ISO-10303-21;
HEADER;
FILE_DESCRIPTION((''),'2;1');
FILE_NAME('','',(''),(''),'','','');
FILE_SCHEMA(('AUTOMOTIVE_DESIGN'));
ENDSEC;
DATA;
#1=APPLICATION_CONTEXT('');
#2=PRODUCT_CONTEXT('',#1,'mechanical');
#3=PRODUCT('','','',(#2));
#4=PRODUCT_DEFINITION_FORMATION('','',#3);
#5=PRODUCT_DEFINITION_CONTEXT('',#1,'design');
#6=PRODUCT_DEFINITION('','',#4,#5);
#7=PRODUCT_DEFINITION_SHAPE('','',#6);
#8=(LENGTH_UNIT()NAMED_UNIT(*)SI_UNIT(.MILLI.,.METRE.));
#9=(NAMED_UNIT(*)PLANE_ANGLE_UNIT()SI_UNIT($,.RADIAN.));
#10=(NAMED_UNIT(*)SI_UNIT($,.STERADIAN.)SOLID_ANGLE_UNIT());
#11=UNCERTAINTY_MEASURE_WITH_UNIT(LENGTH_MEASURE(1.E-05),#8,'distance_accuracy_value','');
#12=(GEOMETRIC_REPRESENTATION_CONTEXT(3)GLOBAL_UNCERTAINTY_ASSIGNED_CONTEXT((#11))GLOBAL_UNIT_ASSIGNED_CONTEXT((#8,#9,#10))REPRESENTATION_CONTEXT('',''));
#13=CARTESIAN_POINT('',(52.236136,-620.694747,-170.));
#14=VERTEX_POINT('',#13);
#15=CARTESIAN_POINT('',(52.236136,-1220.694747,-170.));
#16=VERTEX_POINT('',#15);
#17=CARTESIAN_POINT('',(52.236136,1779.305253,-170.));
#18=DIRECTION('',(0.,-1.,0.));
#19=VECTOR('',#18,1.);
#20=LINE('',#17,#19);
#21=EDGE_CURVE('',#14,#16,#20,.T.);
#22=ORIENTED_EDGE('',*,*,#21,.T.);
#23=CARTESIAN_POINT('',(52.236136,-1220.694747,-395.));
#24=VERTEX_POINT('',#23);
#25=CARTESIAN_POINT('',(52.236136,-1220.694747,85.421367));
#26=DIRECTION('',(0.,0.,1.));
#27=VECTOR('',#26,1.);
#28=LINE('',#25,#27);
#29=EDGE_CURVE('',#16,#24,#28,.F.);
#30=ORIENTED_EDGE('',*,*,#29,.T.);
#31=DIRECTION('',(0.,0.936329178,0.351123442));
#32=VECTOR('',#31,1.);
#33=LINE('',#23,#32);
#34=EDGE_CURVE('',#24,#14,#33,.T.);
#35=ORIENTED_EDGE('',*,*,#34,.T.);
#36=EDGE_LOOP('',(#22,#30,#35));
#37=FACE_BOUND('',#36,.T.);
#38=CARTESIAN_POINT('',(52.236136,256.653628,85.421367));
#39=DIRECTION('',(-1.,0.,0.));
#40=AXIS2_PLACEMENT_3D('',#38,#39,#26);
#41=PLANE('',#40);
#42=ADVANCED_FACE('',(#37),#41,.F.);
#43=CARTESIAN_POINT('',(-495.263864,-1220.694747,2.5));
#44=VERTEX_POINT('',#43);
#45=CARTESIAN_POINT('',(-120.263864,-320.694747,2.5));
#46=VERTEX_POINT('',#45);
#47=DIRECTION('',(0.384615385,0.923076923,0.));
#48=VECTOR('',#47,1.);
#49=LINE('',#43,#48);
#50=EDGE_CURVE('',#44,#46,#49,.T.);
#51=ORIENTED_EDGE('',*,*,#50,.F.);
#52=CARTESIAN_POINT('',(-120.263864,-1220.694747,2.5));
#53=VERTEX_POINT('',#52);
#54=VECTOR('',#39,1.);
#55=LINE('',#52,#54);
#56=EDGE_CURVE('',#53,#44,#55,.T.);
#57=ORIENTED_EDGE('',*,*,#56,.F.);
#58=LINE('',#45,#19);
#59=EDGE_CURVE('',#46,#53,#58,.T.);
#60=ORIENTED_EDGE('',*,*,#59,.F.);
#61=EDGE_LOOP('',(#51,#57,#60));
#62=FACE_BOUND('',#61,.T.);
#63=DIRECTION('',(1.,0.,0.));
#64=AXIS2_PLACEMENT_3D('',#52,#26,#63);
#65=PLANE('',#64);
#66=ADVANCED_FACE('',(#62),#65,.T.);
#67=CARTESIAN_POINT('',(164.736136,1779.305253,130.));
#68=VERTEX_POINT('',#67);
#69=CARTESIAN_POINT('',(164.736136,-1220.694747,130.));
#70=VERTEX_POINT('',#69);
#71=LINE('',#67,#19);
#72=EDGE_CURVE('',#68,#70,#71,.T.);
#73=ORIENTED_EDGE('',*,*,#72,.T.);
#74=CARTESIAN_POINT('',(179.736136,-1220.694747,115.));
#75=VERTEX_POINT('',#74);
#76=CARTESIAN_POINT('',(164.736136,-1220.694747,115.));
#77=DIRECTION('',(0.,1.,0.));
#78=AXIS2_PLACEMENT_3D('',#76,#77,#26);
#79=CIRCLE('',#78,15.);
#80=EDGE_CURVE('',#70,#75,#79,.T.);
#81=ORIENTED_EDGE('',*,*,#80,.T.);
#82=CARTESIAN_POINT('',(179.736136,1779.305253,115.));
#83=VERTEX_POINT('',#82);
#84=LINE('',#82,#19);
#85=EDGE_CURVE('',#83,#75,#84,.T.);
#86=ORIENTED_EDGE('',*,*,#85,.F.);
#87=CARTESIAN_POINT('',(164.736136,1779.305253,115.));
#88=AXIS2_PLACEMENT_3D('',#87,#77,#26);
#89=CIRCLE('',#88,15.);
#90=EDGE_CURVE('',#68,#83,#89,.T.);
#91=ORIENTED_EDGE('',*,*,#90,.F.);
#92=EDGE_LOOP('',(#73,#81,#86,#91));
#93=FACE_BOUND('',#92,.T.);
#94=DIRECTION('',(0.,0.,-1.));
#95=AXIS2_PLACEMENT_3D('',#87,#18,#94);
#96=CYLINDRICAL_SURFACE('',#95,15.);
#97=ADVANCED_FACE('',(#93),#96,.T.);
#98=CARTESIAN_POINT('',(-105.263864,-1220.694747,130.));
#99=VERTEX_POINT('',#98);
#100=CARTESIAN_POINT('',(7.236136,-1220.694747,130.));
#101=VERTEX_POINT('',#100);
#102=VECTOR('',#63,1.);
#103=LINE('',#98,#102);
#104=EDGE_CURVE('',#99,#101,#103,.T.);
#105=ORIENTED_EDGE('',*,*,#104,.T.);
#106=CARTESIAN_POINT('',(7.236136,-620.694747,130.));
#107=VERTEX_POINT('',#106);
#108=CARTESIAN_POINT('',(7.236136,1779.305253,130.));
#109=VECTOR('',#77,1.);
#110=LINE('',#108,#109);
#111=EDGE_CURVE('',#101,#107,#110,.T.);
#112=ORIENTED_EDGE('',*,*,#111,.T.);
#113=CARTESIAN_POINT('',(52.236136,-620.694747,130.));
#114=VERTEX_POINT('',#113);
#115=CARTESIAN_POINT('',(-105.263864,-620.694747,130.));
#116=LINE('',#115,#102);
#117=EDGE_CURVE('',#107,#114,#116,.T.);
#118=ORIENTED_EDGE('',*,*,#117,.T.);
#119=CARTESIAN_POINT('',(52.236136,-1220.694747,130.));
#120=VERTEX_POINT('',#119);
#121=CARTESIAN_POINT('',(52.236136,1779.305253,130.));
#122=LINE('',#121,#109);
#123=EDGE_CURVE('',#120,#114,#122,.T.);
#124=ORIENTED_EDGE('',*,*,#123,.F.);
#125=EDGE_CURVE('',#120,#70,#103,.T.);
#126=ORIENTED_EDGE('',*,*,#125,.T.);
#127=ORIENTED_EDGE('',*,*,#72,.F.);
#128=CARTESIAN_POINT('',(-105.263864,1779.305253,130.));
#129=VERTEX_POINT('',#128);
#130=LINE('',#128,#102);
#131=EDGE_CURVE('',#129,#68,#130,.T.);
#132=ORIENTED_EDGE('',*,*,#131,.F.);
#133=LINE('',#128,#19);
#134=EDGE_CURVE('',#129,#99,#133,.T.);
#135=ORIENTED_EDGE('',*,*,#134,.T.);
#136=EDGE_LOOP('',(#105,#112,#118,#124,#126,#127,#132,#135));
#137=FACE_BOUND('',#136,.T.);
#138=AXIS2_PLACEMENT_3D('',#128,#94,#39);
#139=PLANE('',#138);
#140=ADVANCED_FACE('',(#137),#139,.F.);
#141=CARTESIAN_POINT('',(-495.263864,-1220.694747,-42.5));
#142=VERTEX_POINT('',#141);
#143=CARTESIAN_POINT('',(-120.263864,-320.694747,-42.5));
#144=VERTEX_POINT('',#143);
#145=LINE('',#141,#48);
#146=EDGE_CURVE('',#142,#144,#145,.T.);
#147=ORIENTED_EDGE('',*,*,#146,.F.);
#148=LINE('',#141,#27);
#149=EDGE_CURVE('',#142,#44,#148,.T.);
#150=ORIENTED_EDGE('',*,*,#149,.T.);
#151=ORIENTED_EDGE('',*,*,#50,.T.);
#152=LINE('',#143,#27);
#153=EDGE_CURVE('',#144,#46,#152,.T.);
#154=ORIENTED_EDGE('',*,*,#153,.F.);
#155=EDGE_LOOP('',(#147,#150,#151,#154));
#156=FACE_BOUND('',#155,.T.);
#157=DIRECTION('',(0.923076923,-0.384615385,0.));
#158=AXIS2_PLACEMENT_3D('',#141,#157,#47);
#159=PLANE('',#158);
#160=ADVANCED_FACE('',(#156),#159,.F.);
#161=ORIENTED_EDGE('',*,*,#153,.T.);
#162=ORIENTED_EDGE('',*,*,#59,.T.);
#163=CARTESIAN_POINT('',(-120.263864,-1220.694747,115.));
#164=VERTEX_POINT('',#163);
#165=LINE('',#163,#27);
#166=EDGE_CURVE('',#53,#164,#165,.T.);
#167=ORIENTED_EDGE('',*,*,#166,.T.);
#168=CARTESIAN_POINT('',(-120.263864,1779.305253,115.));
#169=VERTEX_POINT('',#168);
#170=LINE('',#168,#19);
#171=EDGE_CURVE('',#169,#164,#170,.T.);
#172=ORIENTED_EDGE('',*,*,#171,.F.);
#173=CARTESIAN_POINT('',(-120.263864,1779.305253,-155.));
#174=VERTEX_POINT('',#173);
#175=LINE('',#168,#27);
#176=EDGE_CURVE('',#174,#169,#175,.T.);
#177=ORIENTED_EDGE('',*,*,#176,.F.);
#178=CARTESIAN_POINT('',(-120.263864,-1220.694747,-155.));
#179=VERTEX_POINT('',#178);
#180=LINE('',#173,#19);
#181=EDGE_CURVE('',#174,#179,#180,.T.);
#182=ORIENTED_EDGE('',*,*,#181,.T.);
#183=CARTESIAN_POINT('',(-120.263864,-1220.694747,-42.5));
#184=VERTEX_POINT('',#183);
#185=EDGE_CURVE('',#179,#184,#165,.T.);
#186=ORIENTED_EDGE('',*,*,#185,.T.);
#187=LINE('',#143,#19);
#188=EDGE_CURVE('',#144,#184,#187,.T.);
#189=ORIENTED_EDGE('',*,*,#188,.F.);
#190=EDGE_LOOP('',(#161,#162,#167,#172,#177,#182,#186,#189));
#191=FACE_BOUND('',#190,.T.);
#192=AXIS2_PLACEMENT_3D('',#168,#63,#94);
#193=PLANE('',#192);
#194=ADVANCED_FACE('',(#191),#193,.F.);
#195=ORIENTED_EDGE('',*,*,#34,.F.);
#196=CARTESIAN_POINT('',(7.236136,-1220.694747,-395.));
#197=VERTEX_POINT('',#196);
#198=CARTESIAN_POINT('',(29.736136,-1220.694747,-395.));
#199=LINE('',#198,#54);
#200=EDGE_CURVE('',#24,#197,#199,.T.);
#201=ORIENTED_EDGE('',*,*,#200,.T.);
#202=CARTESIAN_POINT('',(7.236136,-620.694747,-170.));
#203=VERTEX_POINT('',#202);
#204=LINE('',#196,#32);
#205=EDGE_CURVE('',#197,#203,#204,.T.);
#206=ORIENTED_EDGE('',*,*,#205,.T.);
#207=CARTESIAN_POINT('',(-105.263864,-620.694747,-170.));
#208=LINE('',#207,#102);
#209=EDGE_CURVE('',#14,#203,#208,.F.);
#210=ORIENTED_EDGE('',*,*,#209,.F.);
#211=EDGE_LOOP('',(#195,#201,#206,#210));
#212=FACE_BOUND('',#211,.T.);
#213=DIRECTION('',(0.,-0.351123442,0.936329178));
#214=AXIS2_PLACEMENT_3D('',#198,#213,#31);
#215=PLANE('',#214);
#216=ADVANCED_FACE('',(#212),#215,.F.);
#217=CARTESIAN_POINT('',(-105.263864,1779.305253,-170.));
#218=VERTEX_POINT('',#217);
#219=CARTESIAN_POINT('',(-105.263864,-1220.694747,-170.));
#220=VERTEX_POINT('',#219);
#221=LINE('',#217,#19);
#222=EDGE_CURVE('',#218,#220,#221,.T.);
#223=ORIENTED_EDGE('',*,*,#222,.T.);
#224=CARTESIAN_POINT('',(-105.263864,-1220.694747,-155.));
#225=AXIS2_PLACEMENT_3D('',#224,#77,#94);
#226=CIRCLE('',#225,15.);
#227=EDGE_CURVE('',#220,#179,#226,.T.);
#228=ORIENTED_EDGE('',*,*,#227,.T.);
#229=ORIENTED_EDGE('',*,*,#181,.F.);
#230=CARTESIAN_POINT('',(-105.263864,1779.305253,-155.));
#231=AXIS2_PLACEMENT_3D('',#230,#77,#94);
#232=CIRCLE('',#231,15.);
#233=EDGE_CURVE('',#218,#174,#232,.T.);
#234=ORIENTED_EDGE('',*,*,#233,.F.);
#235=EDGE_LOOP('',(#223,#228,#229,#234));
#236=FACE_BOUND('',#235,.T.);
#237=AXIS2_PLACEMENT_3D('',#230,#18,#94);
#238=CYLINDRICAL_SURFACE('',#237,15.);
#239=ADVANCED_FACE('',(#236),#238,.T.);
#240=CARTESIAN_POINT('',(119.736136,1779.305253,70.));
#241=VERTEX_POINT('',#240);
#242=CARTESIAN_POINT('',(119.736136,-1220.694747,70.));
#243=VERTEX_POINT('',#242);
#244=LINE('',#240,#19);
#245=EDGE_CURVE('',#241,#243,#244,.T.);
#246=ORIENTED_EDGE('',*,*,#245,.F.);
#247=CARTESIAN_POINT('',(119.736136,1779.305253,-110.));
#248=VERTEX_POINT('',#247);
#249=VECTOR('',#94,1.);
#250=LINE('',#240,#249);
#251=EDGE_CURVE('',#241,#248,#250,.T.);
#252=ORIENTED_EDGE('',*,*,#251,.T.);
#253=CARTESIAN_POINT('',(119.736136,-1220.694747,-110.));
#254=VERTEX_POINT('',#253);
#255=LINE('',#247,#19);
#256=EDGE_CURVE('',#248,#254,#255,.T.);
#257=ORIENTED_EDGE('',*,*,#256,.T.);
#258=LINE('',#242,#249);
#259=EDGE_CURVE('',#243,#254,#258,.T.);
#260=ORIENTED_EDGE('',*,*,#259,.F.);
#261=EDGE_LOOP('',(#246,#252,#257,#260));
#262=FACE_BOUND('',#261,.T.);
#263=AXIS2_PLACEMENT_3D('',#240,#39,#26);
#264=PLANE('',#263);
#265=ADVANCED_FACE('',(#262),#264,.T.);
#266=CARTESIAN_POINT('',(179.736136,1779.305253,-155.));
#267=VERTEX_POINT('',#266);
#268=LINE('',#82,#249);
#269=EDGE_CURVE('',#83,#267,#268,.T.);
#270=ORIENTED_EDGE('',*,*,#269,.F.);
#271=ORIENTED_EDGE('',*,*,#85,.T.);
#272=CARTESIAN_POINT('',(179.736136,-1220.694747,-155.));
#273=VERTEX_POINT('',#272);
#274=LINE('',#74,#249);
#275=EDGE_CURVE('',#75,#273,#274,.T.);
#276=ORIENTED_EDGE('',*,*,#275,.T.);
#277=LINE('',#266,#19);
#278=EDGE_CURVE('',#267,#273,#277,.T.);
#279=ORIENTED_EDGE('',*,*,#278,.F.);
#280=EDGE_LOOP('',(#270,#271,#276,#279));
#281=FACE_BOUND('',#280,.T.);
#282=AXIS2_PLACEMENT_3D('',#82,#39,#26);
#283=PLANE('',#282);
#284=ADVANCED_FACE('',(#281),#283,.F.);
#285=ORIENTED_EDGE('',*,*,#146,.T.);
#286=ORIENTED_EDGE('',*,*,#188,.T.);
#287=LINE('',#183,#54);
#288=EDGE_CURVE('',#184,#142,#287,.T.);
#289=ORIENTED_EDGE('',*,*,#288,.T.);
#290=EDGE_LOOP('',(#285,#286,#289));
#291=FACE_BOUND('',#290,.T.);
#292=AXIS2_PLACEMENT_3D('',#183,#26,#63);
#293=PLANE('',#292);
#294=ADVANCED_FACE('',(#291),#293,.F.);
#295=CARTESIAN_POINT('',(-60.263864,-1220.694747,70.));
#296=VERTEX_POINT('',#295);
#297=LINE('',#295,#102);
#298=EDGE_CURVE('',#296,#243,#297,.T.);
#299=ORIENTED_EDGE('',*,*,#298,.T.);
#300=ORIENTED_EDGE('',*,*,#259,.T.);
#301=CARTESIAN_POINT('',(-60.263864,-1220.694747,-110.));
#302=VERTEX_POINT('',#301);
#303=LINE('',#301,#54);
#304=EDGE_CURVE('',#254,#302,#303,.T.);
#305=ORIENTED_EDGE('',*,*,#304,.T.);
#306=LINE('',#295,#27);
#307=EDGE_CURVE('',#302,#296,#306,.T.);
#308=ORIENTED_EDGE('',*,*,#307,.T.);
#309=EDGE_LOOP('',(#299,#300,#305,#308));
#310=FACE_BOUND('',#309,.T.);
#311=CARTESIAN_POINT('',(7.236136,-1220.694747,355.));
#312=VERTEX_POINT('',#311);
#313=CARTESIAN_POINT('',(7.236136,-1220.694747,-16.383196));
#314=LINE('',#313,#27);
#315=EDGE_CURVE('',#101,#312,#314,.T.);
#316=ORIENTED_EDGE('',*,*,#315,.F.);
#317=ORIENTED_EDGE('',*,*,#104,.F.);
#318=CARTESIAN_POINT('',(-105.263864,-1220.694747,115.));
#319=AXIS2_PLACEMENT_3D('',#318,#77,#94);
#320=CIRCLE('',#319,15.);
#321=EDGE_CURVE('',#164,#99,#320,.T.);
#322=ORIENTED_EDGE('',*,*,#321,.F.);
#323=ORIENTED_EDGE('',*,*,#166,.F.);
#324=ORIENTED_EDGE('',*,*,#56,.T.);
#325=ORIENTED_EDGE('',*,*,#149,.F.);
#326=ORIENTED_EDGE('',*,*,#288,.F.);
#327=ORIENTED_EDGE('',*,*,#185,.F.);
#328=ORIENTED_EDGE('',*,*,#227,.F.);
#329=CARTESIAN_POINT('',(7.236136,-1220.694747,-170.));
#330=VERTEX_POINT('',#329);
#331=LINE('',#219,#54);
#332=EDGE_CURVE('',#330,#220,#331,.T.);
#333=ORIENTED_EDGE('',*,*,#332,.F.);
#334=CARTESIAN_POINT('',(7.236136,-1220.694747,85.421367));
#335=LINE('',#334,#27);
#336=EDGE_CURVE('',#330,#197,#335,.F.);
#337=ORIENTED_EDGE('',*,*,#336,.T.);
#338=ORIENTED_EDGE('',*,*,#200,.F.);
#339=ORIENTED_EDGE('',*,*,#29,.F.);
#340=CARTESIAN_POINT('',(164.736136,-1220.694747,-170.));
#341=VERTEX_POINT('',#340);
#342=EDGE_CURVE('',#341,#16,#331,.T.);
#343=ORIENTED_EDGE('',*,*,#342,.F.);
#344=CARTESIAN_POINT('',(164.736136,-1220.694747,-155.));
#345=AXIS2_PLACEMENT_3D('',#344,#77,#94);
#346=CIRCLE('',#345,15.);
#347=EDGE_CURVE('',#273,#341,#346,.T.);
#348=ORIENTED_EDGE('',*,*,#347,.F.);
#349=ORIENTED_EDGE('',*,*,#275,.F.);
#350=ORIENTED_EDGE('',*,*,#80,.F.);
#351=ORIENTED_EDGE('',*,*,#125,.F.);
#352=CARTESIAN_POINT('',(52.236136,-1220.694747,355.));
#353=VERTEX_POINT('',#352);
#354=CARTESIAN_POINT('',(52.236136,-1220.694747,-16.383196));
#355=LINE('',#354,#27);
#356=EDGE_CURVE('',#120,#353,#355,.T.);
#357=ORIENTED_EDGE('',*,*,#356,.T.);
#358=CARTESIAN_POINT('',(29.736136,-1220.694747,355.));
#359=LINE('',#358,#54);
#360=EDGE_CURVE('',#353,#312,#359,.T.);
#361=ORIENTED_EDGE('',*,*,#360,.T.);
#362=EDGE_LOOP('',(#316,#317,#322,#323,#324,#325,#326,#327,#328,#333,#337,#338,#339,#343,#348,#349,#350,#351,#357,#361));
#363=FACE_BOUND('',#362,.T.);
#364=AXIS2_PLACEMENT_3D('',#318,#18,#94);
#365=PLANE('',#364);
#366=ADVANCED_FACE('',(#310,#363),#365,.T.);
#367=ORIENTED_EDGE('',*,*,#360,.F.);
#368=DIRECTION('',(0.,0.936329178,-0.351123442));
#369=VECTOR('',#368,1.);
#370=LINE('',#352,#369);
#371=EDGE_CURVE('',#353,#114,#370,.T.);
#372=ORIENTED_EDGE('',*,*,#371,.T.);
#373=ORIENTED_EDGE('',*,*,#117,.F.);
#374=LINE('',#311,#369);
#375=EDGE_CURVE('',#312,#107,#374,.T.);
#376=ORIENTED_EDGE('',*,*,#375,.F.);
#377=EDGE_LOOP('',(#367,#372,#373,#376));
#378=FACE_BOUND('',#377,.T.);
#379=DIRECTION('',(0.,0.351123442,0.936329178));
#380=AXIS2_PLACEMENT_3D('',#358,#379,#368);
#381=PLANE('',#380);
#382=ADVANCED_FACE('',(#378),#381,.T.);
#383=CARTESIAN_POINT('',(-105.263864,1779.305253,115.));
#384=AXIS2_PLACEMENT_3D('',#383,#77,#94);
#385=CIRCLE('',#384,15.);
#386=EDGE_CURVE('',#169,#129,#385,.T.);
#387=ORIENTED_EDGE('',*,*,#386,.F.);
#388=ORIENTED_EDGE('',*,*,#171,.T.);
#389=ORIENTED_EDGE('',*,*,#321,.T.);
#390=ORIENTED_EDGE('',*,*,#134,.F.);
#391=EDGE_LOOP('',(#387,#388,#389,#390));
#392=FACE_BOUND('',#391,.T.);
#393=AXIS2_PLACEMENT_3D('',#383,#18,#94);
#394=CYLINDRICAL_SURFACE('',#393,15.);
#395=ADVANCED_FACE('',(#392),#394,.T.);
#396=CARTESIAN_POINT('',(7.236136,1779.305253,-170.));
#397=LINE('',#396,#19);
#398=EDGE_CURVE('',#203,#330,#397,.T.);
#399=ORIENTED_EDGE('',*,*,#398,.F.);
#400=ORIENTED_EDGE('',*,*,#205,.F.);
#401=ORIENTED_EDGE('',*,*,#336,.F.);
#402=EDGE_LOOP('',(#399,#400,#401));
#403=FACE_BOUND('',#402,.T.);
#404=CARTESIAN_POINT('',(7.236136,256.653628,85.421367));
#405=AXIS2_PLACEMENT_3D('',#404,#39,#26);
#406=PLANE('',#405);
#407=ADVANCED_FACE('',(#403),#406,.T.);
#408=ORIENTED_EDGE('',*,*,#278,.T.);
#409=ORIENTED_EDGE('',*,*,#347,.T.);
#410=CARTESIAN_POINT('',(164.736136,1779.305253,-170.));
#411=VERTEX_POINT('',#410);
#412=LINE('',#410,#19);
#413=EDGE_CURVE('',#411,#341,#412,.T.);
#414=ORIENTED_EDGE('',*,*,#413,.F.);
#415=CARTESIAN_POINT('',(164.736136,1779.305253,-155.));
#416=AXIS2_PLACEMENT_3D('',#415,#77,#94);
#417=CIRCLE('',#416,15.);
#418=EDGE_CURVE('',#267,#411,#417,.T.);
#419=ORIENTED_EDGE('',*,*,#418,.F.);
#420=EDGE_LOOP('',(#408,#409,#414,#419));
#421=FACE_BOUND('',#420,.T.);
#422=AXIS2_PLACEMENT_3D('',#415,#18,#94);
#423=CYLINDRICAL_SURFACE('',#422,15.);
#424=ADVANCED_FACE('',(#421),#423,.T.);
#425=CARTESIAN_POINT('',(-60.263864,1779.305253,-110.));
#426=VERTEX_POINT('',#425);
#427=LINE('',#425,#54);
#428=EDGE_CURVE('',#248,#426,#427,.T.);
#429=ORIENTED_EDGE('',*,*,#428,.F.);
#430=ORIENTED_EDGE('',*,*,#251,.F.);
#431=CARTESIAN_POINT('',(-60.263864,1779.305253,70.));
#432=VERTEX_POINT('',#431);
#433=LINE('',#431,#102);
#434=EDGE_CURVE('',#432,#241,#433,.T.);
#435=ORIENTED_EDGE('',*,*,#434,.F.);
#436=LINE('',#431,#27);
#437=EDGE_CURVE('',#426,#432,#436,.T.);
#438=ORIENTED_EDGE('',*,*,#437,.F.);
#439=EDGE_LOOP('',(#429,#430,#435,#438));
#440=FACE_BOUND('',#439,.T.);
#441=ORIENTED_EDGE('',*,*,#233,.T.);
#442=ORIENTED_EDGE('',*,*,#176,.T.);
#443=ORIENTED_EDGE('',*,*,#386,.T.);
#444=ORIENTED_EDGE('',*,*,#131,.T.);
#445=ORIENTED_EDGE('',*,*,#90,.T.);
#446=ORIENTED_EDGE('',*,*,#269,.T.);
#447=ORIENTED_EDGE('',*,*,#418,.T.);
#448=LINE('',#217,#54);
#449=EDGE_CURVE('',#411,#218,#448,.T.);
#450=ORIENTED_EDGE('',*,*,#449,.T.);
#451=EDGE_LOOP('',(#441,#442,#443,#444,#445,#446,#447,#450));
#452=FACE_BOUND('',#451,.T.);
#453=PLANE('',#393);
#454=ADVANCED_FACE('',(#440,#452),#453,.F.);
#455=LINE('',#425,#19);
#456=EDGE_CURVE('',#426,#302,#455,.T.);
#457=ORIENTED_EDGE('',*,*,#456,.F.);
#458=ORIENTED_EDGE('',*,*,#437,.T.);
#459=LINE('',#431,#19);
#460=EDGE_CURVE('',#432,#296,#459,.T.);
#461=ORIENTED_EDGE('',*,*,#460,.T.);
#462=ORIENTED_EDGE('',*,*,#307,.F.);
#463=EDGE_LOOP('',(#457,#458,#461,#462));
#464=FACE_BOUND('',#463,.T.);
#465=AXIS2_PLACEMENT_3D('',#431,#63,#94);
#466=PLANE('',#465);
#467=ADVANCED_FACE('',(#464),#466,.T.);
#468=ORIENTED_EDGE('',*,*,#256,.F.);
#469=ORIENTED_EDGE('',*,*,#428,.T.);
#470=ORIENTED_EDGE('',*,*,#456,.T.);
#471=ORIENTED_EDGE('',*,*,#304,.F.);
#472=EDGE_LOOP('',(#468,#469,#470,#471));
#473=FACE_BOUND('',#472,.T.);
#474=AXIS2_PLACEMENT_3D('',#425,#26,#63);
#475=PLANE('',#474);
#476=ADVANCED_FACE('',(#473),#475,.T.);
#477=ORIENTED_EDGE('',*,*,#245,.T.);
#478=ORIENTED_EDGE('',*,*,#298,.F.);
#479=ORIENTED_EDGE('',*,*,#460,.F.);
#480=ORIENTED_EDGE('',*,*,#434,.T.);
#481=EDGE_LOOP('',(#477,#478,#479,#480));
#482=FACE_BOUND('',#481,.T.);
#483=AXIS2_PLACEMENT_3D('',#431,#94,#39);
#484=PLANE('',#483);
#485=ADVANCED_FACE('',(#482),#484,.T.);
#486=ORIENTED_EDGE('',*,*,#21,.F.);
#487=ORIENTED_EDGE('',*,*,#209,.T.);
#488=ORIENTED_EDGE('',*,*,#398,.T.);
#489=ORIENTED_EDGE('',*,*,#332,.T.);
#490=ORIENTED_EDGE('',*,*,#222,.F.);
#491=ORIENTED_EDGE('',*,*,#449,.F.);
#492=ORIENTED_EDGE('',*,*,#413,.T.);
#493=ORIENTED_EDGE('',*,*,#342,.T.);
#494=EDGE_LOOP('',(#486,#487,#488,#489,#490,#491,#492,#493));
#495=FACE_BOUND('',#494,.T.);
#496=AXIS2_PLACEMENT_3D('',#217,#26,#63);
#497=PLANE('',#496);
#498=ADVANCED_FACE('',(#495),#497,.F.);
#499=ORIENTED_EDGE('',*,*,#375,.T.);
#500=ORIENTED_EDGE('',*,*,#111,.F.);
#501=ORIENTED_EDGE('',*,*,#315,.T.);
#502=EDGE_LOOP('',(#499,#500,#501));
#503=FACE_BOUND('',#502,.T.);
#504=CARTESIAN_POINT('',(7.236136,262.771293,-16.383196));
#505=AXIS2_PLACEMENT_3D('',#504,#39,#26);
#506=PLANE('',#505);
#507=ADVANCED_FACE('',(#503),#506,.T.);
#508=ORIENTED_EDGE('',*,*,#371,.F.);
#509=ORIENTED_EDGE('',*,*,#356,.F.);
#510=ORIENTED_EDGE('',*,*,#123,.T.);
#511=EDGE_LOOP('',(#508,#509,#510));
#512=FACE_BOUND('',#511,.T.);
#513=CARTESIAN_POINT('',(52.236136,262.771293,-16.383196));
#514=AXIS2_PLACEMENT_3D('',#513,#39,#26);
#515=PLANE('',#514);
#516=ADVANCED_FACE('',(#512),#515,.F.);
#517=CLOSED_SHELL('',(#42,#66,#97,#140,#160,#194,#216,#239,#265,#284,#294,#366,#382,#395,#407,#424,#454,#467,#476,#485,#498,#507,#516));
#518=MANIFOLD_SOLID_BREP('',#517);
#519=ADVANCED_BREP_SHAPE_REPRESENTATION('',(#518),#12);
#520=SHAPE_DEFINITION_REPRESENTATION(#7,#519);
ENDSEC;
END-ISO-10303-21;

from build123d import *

# Parameters (mm, degrees)
SKETCH1_W           = 24
SKETCH1_H           = 24
BOSS_EXTRUDE1_DEPTH = 400
RIB2_START          = -3
RIB2_DEPTH          = 6
BOSS_EXTRUDE2_DEPTH = 3
SCALE3_SCALE        = 7.5


# Read off the part's stored shape, not the designer's step: Rib2
with BuildPart() as part:
    # Sketch1 → Boss-Extrude1 (new body)
    with BuildSketch(Plane(origin=(0, 0, 0), x_dir=(1, 0, 0), z_dir=(0, 1, 0))):
        with BuildLine():
            Line((2, 0), (38, 0))
            ThreePointArc((38, 0), (39.414213562, 0.585786438), (40, 2))
            Line((40, 2), (40, 38))
            ThreePointArc((40, 38), (39.414213562, 39.414213562), (38, 40))
            Line((38, 40), (2, 40))
            ThreePointArc((2, 40), (0.585786438, 39.414213562), (0, 38))
            Line((0, 38), (0, 2))
            ThreePointArc((0, 2), (0.585786438, 0.585786438), (2, 0))
        make_face()
        with Locations((20, 20)):
            Rectangle(SKETCH1_W, SKETCH1_H, mode=Mode.SUBTRACT)
    extrude(amount=BOSS_EXTRUDE1_DEPTH)

    # Rib2 outline → Rib2 (add)
    with BuildSketch(Plane.ZY.offset(-20).offset(RIB2_START)):
        Polygon((0, 80), (0, 0), (30, 0), align=None)
    rib2 = extrude(amount=RIB2_DEPTH)

    # Mirror1: Rib2 across plane
    add(rib2.mirror(Plane(origin=(0, 0, -20), x_dir=(1, 0, 0), z_dir=(0, 0, -1))))

    # Sketch4 → Boss-Extrude2 (add, symmetric)
    with BuildSketch(Plane(origin=(0, 0, -20), x_dir=(-1, 0, 0), z_dir=(0, 0, -1))):
        Polygon((50, 0), (0, 120), (0, 0), align=None)
    extrude(amount=BOSS_EXTRUDE2_DEPTH, both=True)


with BuildPart() as part_1:
    # Scale3: scaled about (18.502132923, 187.799191807, -20)
    add(part.part.scale(SCALE3_SCALE).moved(Location((-120.263864, -1220.694746745, 130))))


solid = part_1.part
